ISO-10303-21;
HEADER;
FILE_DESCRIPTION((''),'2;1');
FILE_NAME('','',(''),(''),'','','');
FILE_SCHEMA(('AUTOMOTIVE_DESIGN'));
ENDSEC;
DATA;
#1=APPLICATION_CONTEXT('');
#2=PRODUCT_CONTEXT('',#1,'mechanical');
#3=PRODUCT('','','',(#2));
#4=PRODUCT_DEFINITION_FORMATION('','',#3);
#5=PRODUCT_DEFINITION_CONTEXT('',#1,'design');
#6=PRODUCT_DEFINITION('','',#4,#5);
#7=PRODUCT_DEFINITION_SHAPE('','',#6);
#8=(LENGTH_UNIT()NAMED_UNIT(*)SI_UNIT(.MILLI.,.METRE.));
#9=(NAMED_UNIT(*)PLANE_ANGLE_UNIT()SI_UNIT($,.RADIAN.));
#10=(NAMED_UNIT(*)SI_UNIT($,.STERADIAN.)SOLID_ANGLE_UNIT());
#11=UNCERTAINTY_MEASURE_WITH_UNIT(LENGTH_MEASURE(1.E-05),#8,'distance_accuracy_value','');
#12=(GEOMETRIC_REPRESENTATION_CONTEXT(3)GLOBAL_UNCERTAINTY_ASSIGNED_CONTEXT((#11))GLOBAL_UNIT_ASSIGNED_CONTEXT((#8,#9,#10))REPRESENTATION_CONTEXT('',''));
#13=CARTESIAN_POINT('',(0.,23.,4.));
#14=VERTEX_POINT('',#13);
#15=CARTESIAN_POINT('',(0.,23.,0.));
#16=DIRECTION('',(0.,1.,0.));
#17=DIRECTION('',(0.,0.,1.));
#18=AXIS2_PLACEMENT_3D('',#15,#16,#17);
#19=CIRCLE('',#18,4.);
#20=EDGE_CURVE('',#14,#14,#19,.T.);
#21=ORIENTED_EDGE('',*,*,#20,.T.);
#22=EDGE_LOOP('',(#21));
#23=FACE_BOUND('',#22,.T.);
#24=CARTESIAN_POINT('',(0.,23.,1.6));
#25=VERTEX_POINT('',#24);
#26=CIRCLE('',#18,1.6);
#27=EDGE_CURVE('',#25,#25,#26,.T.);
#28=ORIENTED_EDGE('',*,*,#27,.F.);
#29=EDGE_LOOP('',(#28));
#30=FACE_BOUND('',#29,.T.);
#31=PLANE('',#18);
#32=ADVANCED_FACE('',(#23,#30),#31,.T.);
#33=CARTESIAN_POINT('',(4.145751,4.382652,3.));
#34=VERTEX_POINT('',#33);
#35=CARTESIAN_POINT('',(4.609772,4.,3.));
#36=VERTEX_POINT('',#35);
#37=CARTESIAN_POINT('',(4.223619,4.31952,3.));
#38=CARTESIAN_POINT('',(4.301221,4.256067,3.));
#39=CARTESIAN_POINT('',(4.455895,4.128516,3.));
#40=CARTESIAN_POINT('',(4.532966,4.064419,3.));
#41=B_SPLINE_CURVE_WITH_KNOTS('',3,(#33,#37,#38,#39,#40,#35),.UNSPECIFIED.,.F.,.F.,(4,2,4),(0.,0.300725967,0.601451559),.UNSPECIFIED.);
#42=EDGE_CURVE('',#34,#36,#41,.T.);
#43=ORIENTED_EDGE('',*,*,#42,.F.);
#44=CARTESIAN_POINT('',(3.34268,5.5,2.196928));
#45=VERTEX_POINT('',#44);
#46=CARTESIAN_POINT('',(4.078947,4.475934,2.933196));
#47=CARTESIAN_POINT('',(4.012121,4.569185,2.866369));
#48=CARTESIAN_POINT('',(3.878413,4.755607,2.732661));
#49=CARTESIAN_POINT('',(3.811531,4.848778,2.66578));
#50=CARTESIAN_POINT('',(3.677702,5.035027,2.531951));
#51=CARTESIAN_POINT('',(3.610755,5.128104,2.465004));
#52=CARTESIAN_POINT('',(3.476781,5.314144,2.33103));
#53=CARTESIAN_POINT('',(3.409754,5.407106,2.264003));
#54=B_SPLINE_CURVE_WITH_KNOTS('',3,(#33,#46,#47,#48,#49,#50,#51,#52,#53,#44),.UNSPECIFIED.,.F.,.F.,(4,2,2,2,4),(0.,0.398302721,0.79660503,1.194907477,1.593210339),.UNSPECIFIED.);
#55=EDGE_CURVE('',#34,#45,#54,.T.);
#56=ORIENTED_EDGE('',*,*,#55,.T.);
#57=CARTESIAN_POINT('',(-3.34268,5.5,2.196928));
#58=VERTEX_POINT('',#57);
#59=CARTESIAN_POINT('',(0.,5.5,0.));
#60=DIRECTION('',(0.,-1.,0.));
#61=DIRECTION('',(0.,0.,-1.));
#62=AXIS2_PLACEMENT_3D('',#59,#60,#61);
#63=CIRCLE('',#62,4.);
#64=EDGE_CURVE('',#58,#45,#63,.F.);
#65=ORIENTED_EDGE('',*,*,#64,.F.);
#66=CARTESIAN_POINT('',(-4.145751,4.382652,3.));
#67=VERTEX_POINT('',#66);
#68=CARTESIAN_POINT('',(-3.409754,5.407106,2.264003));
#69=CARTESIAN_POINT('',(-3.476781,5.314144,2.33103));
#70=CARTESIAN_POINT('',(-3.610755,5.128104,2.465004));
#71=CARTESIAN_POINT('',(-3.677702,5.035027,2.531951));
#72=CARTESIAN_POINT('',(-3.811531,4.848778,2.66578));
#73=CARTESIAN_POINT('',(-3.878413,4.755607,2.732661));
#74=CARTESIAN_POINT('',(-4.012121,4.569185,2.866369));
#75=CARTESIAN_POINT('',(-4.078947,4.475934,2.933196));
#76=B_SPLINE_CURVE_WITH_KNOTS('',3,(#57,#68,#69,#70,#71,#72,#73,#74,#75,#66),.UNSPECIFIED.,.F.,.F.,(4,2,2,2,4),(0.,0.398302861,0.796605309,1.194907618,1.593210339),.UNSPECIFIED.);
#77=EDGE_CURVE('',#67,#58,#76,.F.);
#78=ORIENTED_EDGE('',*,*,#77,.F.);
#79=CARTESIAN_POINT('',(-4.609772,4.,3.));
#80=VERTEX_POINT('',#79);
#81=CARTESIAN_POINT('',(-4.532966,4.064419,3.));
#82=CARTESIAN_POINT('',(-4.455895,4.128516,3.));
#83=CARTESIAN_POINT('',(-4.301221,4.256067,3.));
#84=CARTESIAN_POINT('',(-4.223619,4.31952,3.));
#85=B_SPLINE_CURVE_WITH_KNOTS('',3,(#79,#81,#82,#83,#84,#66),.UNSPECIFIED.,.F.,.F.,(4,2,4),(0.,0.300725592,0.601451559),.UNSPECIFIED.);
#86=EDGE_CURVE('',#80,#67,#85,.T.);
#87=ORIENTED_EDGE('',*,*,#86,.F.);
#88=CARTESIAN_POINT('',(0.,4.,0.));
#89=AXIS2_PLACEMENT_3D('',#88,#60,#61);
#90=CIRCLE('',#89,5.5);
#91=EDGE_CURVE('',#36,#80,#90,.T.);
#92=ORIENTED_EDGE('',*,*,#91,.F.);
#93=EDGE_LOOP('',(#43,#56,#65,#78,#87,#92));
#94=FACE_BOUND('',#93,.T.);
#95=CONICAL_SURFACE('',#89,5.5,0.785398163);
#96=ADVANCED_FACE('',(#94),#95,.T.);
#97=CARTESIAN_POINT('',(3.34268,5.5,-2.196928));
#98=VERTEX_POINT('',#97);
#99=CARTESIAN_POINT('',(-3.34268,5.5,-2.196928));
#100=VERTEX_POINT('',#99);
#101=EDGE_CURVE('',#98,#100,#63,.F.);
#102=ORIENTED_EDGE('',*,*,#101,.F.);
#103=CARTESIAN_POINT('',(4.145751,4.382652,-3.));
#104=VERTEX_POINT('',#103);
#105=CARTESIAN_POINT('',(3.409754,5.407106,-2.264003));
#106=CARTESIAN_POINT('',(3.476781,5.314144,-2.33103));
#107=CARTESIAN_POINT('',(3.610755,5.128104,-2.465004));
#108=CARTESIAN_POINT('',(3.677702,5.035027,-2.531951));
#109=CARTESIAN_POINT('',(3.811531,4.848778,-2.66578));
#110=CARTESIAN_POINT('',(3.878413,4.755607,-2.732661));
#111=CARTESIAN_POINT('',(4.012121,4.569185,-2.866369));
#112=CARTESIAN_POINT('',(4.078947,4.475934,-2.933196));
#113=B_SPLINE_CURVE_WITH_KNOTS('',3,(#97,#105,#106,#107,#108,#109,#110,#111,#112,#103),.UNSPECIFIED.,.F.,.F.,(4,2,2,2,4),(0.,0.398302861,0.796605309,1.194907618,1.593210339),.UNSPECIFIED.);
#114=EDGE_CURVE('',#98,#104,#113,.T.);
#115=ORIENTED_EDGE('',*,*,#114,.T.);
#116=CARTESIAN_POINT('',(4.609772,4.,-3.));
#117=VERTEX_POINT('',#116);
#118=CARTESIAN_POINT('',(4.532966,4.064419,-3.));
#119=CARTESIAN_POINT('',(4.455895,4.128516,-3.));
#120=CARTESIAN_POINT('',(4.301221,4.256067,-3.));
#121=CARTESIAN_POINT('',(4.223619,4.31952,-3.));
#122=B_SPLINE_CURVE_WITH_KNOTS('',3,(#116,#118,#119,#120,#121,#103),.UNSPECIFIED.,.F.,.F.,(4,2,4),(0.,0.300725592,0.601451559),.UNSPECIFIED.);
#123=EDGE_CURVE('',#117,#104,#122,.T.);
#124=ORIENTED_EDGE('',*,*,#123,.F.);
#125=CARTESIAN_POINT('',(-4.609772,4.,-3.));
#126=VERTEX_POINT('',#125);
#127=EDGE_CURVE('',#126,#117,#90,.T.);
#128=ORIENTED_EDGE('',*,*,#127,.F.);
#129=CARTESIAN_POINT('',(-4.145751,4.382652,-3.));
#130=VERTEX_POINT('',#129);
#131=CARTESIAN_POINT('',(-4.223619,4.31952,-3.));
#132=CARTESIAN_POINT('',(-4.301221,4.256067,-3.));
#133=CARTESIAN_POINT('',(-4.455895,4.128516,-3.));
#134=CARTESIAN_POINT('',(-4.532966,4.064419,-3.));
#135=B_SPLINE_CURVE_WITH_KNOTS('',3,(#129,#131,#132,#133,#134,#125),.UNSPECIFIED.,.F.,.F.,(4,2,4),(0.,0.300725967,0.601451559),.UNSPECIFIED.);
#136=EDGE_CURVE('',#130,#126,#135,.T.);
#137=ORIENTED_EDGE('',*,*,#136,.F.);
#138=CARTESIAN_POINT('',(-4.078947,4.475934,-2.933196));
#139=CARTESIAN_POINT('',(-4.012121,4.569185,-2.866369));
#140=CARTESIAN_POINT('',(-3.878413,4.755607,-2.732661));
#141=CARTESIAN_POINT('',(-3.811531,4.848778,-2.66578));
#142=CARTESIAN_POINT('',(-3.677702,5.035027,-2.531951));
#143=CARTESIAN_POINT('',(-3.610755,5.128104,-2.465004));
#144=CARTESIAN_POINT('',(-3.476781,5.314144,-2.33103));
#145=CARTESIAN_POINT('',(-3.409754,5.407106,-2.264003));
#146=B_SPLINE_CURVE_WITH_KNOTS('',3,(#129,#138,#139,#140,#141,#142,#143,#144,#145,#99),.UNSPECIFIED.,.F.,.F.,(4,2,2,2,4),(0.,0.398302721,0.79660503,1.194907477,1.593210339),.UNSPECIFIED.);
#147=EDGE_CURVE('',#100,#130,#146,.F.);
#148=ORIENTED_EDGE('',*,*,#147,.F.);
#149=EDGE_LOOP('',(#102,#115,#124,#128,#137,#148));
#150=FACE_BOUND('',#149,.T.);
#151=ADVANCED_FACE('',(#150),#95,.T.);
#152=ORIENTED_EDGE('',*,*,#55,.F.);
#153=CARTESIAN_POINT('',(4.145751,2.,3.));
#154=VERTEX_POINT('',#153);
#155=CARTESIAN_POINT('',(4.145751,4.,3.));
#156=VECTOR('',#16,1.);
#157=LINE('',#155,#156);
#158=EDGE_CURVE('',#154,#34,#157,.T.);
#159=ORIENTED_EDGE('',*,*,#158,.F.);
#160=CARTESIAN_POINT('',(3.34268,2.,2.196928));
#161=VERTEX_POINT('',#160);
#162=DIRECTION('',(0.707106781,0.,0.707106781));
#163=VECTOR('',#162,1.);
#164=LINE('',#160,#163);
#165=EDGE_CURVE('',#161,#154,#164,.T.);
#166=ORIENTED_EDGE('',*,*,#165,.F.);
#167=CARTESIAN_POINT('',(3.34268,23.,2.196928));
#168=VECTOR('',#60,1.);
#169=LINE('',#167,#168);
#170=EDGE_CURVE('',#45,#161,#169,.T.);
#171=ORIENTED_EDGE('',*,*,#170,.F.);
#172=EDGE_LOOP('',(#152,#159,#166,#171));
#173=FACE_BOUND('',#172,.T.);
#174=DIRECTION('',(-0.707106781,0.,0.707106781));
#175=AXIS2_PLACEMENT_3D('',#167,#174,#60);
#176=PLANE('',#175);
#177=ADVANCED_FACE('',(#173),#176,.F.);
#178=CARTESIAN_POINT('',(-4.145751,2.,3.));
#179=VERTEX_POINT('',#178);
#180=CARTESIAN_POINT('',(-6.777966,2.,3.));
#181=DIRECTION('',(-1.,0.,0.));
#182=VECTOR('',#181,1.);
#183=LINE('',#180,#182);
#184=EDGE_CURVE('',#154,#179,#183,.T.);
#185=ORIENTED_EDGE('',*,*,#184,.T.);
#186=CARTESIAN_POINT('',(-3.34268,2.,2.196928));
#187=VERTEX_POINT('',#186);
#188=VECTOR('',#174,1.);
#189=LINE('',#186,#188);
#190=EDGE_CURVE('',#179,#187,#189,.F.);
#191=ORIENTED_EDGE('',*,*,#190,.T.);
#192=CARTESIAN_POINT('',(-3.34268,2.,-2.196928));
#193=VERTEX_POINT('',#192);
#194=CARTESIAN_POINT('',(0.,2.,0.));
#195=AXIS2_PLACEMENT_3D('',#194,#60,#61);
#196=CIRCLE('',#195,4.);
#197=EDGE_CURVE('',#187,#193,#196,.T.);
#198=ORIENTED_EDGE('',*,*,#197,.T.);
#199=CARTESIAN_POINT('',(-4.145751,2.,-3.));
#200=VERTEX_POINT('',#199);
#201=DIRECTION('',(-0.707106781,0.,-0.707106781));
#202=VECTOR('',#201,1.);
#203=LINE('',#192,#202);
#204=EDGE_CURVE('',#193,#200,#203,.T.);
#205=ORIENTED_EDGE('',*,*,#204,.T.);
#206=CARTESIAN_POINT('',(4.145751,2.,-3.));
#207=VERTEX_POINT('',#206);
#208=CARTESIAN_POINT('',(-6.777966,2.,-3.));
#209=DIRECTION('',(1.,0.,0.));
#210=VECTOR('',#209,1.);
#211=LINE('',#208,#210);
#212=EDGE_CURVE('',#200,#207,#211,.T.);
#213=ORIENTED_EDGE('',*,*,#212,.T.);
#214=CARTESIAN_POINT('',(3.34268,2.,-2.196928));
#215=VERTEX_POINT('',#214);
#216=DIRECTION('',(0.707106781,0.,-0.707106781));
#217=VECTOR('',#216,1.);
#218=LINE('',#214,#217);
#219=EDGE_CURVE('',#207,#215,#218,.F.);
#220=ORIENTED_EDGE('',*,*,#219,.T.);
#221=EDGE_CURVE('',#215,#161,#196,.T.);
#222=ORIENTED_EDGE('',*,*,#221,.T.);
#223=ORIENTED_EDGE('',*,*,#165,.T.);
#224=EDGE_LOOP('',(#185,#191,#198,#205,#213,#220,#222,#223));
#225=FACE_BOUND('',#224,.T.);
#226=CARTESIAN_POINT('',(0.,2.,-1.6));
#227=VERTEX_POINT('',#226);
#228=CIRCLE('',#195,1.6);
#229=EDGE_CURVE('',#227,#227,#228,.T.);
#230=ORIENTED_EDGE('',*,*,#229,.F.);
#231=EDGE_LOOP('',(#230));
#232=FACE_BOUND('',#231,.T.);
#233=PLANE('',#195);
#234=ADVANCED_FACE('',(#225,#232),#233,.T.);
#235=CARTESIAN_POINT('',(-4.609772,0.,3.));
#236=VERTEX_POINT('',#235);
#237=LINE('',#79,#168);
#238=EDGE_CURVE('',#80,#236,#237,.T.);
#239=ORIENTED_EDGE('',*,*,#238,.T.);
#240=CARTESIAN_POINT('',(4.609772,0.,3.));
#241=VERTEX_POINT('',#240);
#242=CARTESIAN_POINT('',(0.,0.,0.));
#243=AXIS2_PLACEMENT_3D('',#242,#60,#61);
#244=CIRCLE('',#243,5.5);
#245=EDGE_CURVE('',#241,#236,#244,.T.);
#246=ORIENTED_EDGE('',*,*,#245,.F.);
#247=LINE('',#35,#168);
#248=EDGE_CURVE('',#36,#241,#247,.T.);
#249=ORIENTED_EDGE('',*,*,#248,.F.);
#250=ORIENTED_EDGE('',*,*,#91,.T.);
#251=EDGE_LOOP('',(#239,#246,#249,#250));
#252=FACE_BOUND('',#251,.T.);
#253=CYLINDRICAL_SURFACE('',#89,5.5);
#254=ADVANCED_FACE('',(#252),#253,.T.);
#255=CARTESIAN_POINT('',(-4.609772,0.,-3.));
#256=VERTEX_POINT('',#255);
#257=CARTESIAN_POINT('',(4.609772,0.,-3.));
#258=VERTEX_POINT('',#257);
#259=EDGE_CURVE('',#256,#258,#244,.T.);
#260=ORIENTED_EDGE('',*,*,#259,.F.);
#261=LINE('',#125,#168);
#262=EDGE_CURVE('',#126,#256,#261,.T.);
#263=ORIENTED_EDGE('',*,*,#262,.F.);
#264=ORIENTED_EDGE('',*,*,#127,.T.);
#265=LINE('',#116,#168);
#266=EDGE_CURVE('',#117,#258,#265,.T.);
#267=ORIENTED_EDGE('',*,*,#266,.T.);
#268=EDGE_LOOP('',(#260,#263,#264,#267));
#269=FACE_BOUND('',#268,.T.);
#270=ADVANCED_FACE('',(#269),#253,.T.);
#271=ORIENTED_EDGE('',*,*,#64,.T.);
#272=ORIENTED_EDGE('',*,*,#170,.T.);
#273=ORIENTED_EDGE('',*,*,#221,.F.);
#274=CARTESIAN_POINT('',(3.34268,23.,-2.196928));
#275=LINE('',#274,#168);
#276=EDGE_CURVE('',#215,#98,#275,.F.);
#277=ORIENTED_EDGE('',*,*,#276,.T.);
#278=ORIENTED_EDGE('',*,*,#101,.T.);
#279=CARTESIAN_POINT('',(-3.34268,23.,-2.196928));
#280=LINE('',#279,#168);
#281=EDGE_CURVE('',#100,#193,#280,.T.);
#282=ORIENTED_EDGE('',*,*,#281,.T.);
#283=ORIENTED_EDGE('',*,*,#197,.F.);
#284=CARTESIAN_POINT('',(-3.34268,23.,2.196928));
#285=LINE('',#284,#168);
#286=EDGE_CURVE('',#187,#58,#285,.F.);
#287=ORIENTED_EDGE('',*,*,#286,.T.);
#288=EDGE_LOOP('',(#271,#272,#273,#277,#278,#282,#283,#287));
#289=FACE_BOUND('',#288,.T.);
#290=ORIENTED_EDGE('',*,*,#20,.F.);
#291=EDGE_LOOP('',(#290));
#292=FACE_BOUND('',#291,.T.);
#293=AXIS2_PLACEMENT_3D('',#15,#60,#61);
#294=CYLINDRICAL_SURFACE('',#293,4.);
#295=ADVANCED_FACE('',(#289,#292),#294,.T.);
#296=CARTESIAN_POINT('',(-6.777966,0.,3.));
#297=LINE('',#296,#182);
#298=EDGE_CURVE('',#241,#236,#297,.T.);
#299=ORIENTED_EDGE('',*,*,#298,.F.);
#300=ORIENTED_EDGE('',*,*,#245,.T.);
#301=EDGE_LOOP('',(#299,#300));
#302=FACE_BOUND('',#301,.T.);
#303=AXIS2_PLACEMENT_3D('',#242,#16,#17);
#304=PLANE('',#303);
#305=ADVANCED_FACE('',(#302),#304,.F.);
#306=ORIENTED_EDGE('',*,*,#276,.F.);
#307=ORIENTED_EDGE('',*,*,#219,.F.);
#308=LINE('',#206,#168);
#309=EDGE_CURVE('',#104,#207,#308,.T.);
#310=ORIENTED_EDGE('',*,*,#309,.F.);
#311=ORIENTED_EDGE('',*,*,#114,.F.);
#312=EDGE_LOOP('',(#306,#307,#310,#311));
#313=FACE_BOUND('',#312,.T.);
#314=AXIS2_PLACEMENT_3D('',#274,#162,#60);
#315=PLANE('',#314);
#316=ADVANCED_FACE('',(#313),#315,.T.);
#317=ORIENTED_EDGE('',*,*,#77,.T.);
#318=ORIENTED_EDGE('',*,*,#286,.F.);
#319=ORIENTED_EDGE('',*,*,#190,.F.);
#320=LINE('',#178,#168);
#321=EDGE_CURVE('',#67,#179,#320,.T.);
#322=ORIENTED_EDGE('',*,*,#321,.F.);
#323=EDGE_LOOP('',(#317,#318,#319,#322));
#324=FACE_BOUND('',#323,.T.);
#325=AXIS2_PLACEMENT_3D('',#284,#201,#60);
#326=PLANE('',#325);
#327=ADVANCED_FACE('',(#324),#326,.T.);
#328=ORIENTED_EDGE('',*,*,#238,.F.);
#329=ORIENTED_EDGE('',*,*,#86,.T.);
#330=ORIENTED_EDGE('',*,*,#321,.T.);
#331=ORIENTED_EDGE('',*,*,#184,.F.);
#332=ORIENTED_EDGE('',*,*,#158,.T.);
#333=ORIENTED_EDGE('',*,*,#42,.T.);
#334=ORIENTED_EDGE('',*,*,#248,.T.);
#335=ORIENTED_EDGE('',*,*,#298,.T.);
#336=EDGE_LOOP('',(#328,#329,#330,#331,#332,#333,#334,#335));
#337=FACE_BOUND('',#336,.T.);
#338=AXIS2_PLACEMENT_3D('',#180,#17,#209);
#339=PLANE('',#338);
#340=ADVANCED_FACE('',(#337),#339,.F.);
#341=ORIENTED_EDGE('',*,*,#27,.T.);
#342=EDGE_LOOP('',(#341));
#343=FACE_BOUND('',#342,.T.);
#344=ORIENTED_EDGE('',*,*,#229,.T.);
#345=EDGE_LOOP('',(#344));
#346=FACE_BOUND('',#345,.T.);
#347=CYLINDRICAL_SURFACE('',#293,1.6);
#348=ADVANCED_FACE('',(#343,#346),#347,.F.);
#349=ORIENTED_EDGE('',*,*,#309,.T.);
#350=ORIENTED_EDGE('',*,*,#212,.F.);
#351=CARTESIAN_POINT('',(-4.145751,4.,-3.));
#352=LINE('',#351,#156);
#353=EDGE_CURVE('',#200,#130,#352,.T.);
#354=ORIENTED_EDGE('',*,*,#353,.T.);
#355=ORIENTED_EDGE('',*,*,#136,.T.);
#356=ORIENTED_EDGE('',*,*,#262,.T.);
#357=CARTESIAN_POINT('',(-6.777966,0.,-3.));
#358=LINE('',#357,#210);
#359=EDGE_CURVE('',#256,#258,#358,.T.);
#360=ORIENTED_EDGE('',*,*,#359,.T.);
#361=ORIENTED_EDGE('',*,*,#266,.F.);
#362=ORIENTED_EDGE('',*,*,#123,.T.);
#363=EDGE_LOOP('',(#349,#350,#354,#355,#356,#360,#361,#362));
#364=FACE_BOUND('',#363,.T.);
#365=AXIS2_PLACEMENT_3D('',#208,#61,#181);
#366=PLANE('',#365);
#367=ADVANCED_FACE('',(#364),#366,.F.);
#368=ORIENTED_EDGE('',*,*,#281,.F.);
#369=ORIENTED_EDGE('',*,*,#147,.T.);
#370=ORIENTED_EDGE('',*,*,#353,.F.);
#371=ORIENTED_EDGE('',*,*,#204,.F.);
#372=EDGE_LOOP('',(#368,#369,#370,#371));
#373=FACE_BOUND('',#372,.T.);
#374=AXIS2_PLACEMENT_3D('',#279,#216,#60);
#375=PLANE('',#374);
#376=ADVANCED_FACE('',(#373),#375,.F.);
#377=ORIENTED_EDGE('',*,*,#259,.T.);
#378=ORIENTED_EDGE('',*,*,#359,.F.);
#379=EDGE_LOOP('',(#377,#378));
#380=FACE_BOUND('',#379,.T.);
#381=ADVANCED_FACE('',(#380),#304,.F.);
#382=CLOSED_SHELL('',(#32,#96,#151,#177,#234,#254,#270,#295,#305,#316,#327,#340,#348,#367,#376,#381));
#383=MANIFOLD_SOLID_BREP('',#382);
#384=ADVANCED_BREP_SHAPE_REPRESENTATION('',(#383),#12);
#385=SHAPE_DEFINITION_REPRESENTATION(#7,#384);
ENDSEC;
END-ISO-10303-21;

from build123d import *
from OCP.BRepFilletAPI import BRepFilletAPI_MakeChamfer

# Parameters (mm, degrees)
SKETCH1_R           = 4
SKETCH1_R_2         = 1.6
BOSS_EXTRUDE1_DEPTH = 23
SKETCH3_W           = 13.555932204
SKETCH3_H           = 6
SKETCH3_R           = 1.6
CUT_EXTRUDE1_DEPTH  = 2
BOSS_EXTRUDE2_DEPTH = 4
CHAMFER1_SIZE       = 1.5
CHAMFER1_SIZE_2     = 1.062746067


with BuildPart() as part:
    # Sketch1 → Boss-Extrude1 (new body)
    with BuildSketch(Plane(origin=(0, 0, 0), x_dir=(1, 0, 0), z_dir=(0, 1, 0))):
        with Locations(Location((0, 0, 0), (0, 0, 270))):
            Circle(SKETCH1_R)
        with Locations(Location((0, 0, 0), (0, 0, 270))):
            Circle(SKETCH1_R_2, mode=Mode.SUBTRACT)
    extrude(amount=BOSS_EXTRUDE1_DEPTH)

    # Sketch3 → Cut-Extrude1 (cut)
    with BuildSketch(Plane.XZ):
        Rectangle(SKETCH3_W, SKETCH3_H)
        with Locations(Location((0, 0, 0), (0, 0, 270))):
            Circle(SKETCH3_R, mode=Mode.SUBTRACT)
    extrude(amount=-CUT_EXTRUDE1_DEPTH, mode=Mode.SUBTRACT)

    # Sketch5 → Boss-Extrude2 (add)
    with BuildSketch(Plane.XZ):
        with BuildLine():
            Line((-4.609772229, 3), (4.609772229, 3))
            ThreePointArc((4.609772229, 3), (0, 5.5), (-4.609772229, 3))
        make_face()
        with BuildLine():
            Line((4.609772229, -3), (-4.609772229, -3))
            ThreePointArc((-4.609772229, -3), (0, -5.5), (4.609772229, -3))
        make_face()
    extrude(amount=-BOSS_EXTRUDE2_DEPTH)

    # Chamfer1
    chamfer1_edges_1 = [part.edges().sort_by_distance(p)[0] for p in [
        (2.645751311, 3, -3),
    ]]
    chamfer1_side_1 = [part.faces().sort_by_distance(p)[0] for p in [
        (2.667006232, 3, -3),
    ]]
    chamfer1_edges_2 = [part.edges().sort_by_distance(p)[0] for p in [
        (-2.645751311, 3, -3),
    ]]
    chamfer1_side_2 = [part.faces().sort_by_distance(p)[0] for p in [
        (-2.667006232, 3, -3),
    ]]
    chamfer1_edges_3 = [part.edges().sort_by_distance(p)[0] for p in [
        (2.645751311, 3, 3),
    ]]
    chamfer1_side_3 = [part.faces().sort_by_distance(p)[0] for p in [
        (2.667006232, 3, 3),
    ]]
    chamfer1_edges_4 = [part.edges().sort_by_distance(p)[0] for p in [
        (-2.645751311, 3, 3),
    ]]
    chamfer1_side_4 = [part.faces().sort_by_distance(p)[0] for p in [
        (-2.667006232, 3, 3),
    ]]
    chamfer1_edges_5 = [part.edges().sort_by_distance(p)[0] for p in [
        (1.414213562, 4, 3.741657387),
        (0, 4, -4),
    ]]
    chamfer1 = BRepFilletAPI_MakeChamfer(part.part.solid().wrapped)
    for e in chamfer1_edges_1:
        chamfer1.Add(CHAMFER1_SIZE - 0.0001, CHAMFER1_SIZE_2 - 0.0001, e.wrapped, chamfer1_side_1[0].wrapped)
    for e in chamfer1_edges_2:
        chamfer1.Add(CHAMFER1_SIZE - 0.0001, CHAMFER1_SIZE_2 - 0.0001, e.wrapped, chamfer1_side_2[0].wrapped)
    for e in chamfer1_edges_3:
        chamfer1.Add(CHAMFER1_SIZE - 0.0001, CHAMFER1_SIZE_2 - 0.0001, e.wrapped, chamfer1_side_3[0].wrapped)
    for e in chamfer1_edges_4:
        chamfer1.Add(CHAMFER1_SIZE - 0.0001, CHAMFER1_SIZE_2 - 0.0001, e.wrapped, chamfer1_side_4[0].wrapped)
    for e in chamfer1_edges_5:
        chamfer1.Add(CHAMFER1_SIZE - 0.0001, e.wrapped)
    add(Compound.cast(chamfer1.Shape()), mode=Mode.REPLACE)  # a hair under: the kernel refuses the full size


solid = part.part
